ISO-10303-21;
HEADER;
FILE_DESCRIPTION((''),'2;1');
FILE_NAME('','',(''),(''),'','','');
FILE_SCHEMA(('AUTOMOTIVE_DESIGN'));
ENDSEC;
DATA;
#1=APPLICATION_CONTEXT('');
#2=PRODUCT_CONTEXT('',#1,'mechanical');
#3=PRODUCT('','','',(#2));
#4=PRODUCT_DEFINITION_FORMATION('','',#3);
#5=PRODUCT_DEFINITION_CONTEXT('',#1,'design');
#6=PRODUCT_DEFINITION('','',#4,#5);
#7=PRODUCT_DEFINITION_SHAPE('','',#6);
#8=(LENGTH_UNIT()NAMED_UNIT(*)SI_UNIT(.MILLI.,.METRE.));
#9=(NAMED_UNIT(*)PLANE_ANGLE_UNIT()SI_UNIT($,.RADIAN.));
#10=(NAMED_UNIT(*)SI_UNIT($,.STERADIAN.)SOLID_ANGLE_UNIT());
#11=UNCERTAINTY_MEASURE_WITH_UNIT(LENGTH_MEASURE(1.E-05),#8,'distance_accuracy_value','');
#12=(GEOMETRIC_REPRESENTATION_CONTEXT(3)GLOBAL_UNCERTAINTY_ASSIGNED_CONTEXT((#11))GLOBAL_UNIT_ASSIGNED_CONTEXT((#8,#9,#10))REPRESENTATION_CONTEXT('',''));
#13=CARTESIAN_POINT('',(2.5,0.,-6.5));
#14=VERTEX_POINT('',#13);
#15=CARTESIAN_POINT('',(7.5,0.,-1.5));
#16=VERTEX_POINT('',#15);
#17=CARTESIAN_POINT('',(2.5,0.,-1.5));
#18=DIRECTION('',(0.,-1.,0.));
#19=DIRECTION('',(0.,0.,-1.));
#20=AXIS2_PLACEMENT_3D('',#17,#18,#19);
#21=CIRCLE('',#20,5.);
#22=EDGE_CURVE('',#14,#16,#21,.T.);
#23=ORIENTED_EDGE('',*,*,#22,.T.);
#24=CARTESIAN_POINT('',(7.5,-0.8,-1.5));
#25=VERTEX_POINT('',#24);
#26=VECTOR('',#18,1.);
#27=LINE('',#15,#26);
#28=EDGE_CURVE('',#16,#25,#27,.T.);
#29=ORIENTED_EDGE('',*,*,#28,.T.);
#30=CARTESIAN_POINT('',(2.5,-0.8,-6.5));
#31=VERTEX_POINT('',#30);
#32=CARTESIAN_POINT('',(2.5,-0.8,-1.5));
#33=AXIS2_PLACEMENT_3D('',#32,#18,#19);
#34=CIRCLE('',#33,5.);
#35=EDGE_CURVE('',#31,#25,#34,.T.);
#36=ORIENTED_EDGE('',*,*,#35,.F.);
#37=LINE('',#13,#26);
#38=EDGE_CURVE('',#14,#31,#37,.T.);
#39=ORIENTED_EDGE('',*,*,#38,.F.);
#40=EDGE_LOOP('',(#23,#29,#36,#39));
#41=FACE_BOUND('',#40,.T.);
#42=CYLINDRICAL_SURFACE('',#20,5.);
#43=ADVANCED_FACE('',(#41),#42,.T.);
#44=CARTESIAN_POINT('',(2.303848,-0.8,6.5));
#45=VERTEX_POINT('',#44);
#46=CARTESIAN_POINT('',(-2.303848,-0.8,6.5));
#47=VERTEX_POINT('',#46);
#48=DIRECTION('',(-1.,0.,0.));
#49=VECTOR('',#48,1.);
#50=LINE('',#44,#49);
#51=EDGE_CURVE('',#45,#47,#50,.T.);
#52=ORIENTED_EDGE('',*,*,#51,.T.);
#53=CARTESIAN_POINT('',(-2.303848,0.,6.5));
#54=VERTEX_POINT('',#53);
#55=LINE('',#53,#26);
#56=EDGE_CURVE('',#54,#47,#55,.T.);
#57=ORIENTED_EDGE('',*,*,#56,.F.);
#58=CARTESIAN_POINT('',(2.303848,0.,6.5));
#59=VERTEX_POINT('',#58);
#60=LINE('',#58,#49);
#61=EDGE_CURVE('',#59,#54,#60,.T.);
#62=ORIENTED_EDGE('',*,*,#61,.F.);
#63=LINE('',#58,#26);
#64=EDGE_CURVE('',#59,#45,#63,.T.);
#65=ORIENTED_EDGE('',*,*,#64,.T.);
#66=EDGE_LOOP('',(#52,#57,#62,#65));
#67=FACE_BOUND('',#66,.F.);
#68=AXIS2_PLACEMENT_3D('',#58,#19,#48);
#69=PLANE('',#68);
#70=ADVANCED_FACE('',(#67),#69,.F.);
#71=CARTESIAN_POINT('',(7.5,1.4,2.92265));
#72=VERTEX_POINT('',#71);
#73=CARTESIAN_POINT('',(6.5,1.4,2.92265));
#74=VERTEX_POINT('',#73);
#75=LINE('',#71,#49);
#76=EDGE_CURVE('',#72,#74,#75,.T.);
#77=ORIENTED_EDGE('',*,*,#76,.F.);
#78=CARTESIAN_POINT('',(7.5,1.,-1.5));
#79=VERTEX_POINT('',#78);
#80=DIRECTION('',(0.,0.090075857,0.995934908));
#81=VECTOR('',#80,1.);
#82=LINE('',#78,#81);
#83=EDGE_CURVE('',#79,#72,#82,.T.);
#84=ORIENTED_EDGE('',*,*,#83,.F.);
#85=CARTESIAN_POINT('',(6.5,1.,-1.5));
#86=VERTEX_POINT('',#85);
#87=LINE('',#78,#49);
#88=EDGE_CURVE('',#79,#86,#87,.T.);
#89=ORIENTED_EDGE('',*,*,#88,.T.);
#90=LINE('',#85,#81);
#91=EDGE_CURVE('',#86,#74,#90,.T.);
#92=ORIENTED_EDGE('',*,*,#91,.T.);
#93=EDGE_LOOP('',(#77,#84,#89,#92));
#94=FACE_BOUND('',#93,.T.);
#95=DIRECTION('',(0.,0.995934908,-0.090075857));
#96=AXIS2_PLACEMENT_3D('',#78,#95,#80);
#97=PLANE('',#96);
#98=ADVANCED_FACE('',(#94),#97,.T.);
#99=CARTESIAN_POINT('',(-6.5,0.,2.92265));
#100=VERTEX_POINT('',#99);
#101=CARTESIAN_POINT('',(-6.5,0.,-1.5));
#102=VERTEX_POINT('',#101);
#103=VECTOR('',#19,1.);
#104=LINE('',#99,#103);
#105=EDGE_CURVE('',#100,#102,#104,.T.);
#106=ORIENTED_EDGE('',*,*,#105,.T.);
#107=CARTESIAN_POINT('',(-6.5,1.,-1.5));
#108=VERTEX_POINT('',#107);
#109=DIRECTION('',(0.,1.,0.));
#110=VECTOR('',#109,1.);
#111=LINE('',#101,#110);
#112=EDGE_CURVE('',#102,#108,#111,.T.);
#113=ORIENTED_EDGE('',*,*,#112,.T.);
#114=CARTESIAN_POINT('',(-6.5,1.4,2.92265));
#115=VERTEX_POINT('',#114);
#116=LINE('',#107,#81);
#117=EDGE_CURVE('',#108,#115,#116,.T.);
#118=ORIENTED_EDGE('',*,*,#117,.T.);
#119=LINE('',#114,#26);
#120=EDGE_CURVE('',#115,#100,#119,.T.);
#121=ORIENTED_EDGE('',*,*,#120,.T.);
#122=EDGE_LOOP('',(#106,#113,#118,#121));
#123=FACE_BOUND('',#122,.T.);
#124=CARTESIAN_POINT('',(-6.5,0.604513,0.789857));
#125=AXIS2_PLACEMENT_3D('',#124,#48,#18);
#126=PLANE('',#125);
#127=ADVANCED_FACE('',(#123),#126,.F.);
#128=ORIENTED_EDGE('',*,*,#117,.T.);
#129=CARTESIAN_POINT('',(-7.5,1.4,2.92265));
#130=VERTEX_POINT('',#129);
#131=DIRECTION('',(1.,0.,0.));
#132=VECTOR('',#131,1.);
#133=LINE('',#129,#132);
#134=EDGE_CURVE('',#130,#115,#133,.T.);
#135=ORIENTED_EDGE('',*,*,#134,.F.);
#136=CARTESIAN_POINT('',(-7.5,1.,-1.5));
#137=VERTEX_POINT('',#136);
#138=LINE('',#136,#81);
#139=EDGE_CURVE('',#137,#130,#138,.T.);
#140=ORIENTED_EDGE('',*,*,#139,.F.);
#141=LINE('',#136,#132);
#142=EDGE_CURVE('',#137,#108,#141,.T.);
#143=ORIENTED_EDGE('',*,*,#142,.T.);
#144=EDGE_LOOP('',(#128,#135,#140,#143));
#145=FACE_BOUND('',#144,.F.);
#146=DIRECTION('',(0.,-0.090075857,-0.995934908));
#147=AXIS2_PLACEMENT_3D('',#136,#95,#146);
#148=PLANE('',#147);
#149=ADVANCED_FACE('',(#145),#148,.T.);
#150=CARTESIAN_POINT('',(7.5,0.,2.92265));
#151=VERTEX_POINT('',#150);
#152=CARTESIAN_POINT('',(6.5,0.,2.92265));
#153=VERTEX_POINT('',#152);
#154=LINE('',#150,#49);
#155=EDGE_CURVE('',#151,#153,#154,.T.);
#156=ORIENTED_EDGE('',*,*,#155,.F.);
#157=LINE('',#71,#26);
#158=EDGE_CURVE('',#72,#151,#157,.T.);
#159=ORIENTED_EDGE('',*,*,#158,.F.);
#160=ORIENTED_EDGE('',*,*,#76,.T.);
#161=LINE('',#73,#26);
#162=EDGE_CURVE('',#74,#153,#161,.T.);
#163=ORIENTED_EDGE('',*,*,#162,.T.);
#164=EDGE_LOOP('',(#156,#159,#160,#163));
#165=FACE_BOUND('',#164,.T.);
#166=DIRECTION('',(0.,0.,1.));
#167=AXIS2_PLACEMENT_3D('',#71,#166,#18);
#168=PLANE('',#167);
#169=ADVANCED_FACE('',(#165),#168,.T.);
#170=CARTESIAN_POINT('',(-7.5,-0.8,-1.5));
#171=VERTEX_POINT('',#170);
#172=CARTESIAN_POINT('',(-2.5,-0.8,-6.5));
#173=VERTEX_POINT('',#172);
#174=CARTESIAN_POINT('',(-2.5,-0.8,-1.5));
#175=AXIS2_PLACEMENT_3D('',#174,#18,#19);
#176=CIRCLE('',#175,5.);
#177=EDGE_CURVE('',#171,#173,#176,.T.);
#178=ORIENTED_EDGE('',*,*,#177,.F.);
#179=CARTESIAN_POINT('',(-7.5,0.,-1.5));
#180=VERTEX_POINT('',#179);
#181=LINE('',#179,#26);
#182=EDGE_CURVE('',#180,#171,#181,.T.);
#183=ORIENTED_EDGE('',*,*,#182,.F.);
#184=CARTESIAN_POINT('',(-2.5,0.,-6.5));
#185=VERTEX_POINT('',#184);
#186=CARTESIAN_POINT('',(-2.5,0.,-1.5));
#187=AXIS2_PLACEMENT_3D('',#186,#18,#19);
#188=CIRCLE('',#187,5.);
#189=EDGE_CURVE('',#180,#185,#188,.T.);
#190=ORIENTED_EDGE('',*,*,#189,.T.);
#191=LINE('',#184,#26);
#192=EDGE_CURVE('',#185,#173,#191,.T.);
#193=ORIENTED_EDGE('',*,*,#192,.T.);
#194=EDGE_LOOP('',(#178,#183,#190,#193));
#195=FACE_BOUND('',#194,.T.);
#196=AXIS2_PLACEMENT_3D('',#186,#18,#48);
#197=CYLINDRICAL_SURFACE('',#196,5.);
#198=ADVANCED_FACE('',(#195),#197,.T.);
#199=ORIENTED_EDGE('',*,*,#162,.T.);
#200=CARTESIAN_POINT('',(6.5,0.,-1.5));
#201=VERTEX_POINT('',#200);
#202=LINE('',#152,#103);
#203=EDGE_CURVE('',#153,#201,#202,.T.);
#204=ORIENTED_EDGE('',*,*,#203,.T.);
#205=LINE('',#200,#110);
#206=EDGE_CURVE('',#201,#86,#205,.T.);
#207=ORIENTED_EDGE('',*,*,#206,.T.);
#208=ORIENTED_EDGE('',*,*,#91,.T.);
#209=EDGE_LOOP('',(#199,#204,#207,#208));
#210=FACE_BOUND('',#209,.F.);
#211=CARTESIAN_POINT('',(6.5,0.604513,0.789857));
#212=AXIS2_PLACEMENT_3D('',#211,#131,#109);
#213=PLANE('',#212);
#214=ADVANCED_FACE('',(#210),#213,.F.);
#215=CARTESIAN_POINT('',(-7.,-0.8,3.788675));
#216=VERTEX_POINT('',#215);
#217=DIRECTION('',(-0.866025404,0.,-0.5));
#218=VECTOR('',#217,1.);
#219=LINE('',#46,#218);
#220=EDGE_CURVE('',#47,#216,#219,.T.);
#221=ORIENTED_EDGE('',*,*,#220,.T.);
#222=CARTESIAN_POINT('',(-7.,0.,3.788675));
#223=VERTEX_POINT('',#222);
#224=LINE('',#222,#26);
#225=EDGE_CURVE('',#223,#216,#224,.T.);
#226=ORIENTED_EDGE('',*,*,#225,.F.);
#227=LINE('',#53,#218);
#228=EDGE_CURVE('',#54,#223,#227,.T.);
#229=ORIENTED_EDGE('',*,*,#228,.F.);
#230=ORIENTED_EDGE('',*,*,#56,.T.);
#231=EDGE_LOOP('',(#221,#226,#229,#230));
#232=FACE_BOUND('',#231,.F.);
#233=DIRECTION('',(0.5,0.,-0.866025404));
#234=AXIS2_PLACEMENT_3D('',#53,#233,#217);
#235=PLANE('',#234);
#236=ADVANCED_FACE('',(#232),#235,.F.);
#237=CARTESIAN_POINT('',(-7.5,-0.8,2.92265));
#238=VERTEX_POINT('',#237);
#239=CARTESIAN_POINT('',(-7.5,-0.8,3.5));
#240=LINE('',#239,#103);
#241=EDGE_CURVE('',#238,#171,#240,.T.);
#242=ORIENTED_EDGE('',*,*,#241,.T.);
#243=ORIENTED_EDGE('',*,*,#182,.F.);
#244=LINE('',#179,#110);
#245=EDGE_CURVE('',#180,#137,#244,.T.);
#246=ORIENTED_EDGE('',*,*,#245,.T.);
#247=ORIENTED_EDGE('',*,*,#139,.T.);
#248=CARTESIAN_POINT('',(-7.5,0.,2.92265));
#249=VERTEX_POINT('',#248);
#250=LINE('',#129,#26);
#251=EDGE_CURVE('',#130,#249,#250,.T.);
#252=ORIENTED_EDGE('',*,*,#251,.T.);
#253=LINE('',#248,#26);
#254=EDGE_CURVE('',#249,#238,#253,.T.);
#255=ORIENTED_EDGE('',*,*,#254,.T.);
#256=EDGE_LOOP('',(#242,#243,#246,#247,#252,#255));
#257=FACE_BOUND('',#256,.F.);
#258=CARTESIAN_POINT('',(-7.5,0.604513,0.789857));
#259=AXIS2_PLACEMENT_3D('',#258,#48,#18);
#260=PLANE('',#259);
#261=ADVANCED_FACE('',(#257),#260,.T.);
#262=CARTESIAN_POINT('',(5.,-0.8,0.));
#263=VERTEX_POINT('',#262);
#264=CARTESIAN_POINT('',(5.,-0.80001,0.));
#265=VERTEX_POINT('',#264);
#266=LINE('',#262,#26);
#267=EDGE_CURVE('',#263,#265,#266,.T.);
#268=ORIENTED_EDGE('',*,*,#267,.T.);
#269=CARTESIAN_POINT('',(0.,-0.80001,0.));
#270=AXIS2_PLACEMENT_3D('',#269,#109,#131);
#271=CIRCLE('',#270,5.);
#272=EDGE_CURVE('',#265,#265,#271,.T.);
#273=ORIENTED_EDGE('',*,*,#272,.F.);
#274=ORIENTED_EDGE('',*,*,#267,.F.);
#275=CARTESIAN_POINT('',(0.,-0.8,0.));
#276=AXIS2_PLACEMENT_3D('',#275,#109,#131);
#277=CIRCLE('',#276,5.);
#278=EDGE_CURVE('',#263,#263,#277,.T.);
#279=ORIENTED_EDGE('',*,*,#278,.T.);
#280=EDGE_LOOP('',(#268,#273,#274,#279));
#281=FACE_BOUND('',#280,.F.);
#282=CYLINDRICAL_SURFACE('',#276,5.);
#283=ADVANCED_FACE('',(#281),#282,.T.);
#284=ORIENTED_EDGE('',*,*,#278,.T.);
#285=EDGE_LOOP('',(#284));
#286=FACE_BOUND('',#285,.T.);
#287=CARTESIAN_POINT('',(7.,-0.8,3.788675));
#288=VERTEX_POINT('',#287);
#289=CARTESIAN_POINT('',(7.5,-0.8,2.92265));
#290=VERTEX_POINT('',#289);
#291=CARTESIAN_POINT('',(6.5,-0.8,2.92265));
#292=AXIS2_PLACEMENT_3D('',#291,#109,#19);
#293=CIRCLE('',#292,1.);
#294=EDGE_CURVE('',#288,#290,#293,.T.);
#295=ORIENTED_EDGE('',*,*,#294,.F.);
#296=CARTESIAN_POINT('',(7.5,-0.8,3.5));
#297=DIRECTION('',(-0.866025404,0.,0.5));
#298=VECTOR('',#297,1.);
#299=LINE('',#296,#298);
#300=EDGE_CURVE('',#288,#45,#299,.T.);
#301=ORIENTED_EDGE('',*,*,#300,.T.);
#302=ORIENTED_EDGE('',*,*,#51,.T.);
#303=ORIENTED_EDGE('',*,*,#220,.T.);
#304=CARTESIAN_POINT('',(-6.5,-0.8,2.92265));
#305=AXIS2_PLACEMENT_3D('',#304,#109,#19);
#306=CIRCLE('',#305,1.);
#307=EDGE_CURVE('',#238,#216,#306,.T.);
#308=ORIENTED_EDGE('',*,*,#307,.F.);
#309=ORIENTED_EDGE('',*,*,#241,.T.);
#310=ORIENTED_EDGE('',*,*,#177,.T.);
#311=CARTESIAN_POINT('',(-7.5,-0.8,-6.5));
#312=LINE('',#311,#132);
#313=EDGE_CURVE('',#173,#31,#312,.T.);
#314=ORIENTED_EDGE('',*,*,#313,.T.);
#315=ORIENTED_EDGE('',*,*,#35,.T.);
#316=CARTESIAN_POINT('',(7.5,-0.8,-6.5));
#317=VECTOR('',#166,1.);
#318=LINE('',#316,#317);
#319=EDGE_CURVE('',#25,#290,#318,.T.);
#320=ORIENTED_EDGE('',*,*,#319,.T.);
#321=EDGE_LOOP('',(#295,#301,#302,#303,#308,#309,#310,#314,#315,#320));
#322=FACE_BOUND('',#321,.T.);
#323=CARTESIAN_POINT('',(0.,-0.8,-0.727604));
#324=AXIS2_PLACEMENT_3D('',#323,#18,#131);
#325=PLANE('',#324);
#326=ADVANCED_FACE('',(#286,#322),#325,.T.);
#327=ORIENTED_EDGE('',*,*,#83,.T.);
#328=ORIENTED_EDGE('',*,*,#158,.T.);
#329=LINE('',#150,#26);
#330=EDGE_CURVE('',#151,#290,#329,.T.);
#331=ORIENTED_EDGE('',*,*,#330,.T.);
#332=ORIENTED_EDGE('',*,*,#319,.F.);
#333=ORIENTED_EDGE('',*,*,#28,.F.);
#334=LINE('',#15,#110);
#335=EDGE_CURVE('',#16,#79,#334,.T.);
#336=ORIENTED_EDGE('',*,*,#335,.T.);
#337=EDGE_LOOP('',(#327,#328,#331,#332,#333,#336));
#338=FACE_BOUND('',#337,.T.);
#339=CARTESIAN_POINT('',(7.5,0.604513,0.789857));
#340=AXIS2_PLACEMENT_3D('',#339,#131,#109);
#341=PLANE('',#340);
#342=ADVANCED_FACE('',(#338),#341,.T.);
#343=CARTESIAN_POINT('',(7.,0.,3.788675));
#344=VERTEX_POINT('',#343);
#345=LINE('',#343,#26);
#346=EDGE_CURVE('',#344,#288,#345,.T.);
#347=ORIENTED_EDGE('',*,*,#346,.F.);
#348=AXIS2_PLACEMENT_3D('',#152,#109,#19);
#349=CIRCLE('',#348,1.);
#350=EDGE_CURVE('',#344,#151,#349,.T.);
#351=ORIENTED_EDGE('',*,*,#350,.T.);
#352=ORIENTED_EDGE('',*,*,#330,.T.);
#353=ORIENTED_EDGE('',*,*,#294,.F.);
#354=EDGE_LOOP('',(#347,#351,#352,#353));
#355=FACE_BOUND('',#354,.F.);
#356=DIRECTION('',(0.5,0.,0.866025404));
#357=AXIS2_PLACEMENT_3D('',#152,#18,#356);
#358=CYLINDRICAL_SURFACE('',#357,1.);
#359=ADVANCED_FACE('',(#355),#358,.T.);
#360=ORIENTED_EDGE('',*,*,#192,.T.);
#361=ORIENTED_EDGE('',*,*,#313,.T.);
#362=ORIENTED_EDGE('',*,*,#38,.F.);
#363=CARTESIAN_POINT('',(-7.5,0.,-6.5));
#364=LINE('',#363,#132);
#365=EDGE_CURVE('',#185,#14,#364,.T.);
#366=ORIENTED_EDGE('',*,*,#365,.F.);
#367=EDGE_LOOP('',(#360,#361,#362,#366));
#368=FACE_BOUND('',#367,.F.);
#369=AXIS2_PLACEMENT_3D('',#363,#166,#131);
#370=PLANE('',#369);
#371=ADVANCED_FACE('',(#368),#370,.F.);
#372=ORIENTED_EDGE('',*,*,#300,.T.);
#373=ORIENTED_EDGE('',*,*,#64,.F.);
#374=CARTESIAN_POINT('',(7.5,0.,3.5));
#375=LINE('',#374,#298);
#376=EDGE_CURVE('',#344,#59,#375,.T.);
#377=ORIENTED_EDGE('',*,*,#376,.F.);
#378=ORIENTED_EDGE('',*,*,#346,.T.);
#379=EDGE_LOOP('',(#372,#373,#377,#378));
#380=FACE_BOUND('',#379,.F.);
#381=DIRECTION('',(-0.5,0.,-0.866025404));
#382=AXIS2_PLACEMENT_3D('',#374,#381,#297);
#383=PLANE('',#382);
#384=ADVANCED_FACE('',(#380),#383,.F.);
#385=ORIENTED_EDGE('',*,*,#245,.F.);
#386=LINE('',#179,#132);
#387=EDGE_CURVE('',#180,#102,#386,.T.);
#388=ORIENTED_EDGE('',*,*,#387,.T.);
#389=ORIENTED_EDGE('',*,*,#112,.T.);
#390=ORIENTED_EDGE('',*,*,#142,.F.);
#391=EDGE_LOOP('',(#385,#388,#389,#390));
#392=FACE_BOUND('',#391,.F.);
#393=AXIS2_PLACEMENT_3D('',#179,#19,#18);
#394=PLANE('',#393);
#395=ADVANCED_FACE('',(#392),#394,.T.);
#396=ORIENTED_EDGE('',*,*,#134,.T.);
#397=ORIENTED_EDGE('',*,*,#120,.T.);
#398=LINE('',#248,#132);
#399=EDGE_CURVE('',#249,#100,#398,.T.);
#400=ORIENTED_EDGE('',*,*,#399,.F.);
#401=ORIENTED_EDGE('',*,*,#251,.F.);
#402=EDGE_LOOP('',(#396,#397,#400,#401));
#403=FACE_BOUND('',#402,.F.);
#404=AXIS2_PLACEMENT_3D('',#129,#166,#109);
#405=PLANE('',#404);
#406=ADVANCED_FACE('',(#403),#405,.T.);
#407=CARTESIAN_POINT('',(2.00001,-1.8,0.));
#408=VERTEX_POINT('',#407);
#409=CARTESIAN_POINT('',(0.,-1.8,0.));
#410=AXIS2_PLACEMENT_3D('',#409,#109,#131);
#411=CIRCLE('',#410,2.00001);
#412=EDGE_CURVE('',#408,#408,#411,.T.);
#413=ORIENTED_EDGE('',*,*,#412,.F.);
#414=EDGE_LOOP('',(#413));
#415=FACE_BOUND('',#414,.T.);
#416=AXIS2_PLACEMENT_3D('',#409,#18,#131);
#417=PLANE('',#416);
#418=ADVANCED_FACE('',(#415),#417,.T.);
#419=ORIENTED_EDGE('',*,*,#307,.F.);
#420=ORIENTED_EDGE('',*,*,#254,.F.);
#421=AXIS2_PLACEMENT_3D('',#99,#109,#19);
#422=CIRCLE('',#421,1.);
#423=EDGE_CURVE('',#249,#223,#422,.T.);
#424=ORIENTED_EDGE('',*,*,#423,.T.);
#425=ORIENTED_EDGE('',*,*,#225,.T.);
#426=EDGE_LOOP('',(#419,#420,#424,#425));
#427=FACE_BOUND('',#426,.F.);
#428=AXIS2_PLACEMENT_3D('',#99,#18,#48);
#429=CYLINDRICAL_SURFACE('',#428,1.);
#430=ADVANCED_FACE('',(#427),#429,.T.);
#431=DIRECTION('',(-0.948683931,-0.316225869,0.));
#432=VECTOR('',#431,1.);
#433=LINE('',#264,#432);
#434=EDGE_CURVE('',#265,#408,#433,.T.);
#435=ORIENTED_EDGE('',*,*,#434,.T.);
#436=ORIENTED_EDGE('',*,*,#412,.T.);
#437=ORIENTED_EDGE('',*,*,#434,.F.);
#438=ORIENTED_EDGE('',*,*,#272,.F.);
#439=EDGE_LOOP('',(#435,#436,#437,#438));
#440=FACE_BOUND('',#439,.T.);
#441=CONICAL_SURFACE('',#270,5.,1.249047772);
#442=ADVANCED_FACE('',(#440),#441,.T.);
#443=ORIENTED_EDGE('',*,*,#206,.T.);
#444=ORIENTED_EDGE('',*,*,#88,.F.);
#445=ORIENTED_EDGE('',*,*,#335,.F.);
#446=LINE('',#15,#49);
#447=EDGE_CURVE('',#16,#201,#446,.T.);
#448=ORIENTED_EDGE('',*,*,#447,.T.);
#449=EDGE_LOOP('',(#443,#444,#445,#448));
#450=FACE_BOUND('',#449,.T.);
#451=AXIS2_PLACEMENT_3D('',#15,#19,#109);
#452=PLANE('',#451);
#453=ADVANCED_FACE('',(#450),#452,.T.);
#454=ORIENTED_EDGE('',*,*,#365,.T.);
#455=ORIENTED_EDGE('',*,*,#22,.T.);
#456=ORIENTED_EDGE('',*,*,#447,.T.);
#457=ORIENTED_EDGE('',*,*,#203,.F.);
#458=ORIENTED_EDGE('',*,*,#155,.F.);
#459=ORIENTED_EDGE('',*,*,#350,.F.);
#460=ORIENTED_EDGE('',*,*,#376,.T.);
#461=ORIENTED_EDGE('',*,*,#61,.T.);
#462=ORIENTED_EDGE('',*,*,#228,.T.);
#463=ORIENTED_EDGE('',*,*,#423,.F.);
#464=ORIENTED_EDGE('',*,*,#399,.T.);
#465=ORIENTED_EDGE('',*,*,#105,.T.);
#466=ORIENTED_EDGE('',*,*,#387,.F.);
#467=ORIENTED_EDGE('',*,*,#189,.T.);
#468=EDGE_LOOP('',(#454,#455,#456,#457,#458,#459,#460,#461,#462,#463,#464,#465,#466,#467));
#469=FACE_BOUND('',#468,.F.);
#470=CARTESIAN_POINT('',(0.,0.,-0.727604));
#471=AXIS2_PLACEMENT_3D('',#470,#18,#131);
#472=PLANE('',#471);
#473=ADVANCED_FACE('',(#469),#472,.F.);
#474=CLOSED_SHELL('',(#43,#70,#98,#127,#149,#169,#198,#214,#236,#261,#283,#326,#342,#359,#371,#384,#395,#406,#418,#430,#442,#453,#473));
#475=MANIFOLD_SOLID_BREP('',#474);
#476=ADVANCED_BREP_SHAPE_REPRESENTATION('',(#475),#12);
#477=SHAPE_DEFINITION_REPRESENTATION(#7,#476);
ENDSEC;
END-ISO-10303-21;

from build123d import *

# Parameters (mm, degrees)
F1_DEPTH = 0.8
F2_R     = 5
F3_R     = 1
F4_R     = 5
F5_DEPTH = 1
F6_SIZE2 = 2.99999
F6_SIZE  = 0.99999
F8_DEPTH = 1


# Not quite as in the source:
# - a fillet or chamfer is up to 0.001 mm smaller than in the source, because OpenCascade refuses the exact size


with BuildPart() as f1:
    # F0 (on Front) → F1 (new body)
    with BuildSketch(Plane.XZ):
        Polygon((7.5, 3.5), (2.3038475773, 6.5), (-2.3038475773, 6.5), (-7.5, 3.5), (-7.5, -6.5), (7.5, -6.5), align=None)
    extrude(amount=F1_DEPTH)

    # F2
    f2_edges = [f1.edges().sort_by_distance(p)[0] for p in [
        (7.5, -0.4, -6.5),
        (-7.5, -0.4, -6.5),
    ]]
    fillet(f2_edges, radius=F2_R)

    # F3
    f3_edges = [f1.edges().sort_by_distance(p)[0] for p in [
        (7.5, -0.4, 3.5),
        (-7.5, -0.4, 3.5),
    ]]
    fillet(f3_edges, radius=F3_R)

    # F4 (on face) → F5 (join)
    with BuildSketch(Plane.XZ.offset(0.8)):
        Circle(F4_R)
    extrude(amount=F5_DEPTH)

    # F6 (size 1 and 3 in the source; OpenCascade refuses exactly that, so slightly less here)
    f6_edges = [f1.edges().sort_by_distance(p)[0] for p in [
        (-5, -1.8, 0),
    ]]
    f6_side = f1.faces().sort_by_distance((-5, -1.3, 0))[0]
    chamfer(f6_edges, length=F6_SIZE, length2=F6_SIZE2, reference=f6_side)

    # F7 (on face) → F8 (join)
    with BuildSketch(Plane.YZ.offset(7.5)):
        Polygon((1.4, 2.9226497308), (0, 2.9226497308), (0, -1.5), (1, -1.5), align=None)
    extrude(amount=-F8_DEPTH)

    # F9: F1 across plane


with BuildPart() as f1_1:
    add(f1.part)
    add(f1.part.mirror(Plane.YZ))


solid = f1_1.part
